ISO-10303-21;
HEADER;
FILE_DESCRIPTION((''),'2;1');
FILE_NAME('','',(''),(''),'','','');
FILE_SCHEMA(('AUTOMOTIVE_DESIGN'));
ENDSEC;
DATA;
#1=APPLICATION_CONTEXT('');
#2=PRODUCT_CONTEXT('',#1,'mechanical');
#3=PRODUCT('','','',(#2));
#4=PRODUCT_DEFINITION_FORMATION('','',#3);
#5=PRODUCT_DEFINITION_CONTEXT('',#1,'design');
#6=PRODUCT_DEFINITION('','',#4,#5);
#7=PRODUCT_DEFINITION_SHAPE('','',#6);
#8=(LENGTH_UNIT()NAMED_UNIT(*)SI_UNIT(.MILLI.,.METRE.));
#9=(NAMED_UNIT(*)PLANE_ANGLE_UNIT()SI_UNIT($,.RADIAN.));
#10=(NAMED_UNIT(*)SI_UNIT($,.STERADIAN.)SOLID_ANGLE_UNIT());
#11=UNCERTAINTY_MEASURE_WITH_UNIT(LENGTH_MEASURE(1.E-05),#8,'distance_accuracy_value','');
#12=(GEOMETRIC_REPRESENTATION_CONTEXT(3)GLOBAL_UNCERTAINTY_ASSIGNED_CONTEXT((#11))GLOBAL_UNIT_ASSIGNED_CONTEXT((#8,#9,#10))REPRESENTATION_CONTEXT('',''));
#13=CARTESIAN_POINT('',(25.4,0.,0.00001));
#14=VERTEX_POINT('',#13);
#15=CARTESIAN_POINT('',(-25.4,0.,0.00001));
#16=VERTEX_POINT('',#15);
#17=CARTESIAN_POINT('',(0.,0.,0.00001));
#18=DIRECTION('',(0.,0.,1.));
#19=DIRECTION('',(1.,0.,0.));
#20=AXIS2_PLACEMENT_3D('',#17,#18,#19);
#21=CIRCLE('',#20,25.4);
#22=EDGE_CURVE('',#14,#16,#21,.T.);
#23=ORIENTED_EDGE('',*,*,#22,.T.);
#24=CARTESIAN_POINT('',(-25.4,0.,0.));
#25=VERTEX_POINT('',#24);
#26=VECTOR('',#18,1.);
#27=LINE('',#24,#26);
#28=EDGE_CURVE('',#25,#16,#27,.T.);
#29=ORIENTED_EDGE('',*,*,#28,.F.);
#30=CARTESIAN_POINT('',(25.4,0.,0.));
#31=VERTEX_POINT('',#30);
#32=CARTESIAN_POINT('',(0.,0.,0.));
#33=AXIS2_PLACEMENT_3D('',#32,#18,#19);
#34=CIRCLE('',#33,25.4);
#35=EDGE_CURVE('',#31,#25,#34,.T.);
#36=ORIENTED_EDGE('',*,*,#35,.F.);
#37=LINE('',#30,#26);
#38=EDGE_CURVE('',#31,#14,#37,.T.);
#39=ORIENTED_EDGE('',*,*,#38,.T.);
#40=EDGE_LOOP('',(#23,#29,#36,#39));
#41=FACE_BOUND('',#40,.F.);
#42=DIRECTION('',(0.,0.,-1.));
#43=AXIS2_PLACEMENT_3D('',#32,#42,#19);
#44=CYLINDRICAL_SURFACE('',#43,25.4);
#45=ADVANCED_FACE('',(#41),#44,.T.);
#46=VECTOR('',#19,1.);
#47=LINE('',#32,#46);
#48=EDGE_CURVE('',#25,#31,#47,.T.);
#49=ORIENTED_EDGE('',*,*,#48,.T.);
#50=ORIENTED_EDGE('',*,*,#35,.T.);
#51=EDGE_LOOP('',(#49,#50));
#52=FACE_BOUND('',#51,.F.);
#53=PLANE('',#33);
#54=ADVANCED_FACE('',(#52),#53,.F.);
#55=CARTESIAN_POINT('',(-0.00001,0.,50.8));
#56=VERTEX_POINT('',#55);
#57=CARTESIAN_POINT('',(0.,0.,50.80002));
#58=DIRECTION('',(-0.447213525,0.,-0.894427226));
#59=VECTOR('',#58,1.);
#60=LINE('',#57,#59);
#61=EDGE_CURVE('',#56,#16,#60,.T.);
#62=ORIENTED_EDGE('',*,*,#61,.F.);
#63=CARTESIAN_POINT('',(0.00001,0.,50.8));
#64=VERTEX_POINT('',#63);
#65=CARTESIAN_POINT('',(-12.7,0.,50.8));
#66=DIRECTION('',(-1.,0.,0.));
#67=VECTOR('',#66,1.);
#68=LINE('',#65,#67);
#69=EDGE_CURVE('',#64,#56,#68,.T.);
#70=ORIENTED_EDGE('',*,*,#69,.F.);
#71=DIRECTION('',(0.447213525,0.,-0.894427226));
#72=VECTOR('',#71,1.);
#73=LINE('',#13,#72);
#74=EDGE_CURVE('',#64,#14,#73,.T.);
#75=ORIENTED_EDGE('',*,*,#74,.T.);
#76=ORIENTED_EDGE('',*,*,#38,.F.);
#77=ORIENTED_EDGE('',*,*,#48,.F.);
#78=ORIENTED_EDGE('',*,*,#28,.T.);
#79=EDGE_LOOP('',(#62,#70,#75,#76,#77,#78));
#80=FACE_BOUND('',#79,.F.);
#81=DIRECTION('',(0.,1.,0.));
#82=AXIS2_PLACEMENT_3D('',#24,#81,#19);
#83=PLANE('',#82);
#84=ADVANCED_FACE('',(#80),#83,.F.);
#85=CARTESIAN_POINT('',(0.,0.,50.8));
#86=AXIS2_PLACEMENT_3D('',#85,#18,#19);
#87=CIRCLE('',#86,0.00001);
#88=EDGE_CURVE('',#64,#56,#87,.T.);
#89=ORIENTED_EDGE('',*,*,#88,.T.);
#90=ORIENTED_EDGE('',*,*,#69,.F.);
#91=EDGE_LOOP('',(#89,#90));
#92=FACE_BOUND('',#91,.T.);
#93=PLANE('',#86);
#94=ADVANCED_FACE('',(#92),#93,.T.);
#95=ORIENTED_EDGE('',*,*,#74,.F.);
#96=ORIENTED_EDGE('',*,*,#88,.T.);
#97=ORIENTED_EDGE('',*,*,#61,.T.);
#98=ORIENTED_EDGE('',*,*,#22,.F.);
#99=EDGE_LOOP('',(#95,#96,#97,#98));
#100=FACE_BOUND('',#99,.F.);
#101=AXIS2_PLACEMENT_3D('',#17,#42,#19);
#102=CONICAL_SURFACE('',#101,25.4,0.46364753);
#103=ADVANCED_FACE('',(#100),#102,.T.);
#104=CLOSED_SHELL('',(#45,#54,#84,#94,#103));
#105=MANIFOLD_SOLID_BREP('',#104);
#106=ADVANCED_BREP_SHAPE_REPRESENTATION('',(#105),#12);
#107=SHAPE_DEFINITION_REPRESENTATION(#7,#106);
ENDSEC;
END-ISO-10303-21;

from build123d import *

# Parameters (mm, degrees)
F0_R     = 25.4
F1_DEPTH = 50.8
F2_SIZE2 = 50.79999
F2_SIZE  = 25.39999
F3_W     = 50.8
F3_H     = 25.4
F4_DEPTH = 101


# Not quite as in the source:
# - a fillet or chamfer is up to 0.001 mm smaller than in the source, because OpenCascade refuses the exact size
# - an extrude ends at something that could not be found from the text; its depth is read off the source's solid


with BuildPart() as f1:
    # F0 (on Top) → F1 (new body)
    with BuildSketch(Plane.XY):
        Circle(F0_R)
    extrude(amount=F1_DEPTH)

    # F2 (size 25.4 and 50.8 in the source; OpenCascade refuses exactly that, so slightly less here)
    f2_edges = [f1.edges().sort_by_distance(p)[0] for p in [
        (-25.4, 0, 50.8),
    ]]
    f2_side = f1.faces().sort_by_distance((0, 0, 50.8))[0]
    chamfer(f2_edges, length=F2_SIZE, length2=F2_SIZE2, reference=f2_side)

    # F3 (on face) → F4 (cut, through all)
    with BuildSketch(Plane(origin=(0, 0, 0), x_dir=(1, 0, 0), z_dir=(0, 0, -1))):
        with Locations((0, 12.7)):
            Rectangle(F3_W, F3_H)
    extrude(amount=-F4_DEPTH, mode=Mode.SUBTRACT)


solid = f1.part
